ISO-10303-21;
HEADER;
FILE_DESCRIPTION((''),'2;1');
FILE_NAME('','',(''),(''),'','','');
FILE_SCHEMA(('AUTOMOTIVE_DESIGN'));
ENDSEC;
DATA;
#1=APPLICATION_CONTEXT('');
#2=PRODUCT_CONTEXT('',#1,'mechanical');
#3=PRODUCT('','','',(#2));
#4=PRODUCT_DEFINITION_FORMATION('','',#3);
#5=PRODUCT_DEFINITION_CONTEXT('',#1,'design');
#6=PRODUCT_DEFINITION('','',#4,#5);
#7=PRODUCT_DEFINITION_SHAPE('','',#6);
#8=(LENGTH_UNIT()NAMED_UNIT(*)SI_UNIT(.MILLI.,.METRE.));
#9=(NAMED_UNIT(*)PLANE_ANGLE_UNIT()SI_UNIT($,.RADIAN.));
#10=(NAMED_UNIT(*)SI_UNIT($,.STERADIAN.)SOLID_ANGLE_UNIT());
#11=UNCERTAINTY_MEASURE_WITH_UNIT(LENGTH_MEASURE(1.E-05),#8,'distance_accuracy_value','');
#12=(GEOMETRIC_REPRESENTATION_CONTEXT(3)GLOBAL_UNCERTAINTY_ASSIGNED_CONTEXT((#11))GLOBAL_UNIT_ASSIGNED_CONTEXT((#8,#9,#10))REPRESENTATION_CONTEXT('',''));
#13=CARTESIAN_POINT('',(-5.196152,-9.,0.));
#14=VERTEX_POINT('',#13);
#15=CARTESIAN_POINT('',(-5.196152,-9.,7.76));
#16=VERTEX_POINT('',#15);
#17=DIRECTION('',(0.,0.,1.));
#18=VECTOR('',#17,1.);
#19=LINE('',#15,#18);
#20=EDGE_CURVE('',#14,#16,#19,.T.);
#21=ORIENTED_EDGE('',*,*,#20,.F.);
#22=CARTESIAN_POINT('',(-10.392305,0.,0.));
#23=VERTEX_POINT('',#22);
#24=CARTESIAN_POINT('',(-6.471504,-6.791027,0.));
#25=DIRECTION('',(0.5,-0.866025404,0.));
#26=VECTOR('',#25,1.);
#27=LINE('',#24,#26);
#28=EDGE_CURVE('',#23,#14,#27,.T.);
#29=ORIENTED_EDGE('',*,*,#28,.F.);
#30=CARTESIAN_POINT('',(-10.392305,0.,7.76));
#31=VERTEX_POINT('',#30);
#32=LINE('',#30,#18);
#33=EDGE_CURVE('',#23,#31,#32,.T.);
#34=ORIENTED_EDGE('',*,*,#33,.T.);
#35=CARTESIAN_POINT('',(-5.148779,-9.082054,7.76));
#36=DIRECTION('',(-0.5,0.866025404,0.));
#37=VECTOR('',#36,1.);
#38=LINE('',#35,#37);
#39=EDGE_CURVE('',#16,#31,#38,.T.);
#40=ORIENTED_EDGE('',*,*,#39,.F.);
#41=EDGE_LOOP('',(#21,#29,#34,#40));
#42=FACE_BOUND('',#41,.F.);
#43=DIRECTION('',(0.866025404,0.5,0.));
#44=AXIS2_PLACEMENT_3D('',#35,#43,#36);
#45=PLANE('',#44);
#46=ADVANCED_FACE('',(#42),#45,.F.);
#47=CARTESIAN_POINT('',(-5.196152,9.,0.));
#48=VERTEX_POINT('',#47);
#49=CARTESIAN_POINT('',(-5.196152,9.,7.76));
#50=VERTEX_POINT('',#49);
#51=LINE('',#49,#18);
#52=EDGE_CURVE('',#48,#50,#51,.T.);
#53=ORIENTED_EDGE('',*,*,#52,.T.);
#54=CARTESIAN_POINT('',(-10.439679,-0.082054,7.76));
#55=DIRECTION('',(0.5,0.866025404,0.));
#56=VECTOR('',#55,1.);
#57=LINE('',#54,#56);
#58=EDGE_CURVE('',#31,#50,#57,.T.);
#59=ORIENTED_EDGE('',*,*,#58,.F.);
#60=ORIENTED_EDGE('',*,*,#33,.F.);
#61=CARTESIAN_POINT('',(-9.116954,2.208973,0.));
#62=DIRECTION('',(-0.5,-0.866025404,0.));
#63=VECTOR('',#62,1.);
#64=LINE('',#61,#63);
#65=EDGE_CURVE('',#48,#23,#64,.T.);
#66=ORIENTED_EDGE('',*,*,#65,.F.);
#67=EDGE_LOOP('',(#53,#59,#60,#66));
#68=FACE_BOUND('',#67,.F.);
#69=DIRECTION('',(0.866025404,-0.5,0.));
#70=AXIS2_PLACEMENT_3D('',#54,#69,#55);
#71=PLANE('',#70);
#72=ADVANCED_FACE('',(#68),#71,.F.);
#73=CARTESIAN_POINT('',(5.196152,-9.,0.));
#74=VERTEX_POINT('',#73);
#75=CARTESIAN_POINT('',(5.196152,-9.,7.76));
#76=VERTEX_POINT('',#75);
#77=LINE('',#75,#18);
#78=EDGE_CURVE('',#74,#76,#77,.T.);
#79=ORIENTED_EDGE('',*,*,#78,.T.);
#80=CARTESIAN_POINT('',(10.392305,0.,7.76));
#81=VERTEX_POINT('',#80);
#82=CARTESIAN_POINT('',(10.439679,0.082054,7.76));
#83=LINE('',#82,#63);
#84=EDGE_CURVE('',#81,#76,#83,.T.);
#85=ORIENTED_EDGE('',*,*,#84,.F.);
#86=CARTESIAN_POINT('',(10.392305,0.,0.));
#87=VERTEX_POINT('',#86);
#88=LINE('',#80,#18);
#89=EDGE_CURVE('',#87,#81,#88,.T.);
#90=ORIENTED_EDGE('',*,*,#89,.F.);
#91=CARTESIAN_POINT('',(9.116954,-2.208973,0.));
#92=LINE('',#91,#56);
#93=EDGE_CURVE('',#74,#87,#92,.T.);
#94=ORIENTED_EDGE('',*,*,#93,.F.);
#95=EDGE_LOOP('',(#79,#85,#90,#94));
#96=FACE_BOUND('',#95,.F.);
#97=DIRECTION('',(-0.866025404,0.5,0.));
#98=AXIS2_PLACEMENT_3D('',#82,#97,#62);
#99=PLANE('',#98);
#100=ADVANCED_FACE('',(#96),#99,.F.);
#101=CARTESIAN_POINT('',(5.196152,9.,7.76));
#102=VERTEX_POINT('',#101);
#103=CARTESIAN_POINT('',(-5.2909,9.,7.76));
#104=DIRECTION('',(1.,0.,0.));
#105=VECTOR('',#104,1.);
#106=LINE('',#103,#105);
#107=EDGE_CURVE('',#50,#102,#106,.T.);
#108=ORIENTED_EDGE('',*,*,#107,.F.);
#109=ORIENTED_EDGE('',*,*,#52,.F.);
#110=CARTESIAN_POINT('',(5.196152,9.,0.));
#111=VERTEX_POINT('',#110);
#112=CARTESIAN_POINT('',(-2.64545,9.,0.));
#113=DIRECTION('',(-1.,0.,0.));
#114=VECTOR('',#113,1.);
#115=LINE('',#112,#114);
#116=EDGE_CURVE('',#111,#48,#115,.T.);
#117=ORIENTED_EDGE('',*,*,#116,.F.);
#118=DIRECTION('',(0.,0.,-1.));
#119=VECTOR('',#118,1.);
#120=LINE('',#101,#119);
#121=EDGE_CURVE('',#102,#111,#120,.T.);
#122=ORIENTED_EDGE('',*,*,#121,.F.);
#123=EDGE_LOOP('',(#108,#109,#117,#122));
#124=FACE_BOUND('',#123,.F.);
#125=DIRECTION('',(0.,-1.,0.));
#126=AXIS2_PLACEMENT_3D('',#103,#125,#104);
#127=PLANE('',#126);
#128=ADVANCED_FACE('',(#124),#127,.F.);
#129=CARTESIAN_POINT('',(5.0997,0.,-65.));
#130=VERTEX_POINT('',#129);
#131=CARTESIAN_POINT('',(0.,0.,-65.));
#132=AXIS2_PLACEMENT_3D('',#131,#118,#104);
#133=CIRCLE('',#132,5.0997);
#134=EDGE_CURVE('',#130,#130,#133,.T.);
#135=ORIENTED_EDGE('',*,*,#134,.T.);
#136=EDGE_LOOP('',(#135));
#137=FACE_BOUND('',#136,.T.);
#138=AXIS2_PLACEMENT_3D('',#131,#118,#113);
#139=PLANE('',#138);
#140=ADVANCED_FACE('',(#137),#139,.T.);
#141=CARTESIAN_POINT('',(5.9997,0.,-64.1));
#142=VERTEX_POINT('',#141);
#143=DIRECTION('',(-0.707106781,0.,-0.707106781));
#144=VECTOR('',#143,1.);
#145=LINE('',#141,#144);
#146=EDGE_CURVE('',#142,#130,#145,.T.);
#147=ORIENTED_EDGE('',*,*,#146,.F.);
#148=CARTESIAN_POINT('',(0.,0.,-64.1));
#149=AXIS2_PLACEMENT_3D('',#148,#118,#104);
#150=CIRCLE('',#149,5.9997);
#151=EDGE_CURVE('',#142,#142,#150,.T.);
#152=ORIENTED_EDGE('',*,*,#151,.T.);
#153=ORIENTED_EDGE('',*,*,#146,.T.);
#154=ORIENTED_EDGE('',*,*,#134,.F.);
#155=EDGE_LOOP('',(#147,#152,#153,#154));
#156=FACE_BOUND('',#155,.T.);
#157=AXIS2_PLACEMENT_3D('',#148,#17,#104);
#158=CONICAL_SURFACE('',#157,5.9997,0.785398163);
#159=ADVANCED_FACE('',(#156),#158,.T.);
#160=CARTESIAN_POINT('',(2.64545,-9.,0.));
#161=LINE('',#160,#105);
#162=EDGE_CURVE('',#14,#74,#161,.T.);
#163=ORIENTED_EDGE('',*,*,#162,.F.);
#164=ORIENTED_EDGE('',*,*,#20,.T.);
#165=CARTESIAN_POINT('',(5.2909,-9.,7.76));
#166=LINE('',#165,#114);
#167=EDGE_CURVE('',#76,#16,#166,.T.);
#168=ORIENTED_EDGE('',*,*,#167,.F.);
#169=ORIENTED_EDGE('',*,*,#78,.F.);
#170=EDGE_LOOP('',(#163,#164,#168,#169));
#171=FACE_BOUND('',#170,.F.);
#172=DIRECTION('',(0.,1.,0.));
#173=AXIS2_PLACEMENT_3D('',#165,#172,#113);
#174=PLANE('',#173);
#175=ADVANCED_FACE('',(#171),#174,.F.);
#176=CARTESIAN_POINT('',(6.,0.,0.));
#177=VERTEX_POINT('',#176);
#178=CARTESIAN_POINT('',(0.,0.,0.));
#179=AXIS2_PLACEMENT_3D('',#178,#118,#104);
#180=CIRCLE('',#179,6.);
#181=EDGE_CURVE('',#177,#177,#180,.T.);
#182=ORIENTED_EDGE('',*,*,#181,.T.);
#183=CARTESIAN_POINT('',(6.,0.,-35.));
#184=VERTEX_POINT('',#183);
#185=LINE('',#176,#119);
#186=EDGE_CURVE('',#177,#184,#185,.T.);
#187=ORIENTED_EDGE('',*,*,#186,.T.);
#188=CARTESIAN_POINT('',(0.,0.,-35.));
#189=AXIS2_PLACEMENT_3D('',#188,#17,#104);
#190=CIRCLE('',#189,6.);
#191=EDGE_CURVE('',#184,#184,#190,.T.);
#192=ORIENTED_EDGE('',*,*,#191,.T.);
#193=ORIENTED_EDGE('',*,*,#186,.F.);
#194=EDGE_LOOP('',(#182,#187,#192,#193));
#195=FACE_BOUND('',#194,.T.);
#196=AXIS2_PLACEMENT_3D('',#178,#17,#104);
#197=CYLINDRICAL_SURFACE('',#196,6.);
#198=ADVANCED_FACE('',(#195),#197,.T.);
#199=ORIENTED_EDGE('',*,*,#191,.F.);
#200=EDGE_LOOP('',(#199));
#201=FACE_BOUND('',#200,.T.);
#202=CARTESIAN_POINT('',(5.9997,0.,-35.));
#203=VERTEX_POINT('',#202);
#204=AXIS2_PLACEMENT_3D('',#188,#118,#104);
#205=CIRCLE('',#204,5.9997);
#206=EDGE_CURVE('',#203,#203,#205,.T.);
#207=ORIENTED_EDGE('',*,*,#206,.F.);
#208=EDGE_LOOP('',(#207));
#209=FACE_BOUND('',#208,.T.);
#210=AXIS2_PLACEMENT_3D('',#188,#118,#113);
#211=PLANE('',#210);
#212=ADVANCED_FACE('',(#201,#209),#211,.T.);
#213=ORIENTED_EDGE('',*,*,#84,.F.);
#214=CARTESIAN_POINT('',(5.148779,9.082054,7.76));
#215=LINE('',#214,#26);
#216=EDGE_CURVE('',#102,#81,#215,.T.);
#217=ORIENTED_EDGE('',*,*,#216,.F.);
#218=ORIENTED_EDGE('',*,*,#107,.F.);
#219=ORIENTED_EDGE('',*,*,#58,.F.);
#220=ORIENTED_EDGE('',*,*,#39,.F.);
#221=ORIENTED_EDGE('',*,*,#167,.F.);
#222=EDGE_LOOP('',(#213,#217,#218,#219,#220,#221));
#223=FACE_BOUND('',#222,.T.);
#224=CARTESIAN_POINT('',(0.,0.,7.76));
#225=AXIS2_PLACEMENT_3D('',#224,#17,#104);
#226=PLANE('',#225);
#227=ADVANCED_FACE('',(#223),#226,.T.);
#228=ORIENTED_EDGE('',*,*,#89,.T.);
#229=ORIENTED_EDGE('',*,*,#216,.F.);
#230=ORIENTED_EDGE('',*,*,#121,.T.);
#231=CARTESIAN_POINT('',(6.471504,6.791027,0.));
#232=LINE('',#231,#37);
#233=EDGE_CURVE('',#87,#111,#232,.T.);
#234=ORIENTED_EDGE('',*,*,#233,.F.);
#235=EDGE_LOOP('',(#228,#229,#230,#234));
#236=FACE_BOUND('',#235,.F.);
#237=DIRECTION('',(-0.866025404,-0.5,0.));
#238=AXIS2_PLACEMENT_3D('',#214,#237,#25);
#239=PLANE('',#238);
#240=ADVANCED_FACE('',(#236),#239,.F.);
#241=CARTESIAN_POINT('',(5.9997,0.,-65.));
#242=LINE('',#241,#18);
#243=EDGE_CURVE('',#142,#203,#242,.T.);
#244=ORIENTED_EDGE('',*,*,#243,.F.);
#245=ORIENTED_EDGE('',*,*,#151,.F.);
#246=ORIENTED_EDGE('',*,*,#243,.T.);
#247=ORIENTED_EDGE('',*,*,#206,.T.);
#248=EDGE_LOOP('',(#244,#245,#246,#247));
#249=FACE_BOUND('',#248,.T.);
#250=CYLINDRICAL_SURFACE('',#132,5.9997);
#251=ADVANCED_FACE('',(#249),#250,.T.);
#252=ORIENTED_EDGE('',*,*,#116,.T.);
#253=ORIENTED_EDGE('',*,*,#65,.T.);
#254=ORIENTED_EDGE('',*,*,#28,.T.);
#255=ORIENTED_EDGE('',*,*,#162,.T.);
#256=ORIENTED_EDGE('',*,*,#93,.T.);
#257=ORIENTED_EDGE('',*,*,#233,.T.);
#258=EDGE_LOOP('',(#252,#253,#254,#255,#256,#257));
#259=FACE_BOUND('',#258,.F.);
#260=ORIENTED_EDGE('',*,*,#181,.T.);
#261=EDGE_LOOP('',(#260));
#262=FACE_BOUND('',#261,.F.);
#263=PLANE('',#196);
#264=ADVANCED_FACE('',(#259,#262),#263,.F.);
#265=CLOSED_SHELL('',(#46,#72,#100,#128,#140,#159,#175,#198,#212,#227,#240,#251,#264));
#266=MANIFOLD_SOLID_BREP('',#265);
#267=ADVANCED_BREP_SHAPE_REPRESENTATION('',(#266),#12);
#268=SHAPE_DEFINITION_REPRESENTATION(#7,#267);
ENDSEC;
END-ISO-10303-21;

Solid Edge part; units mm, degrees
sketch "Sketch1" plane through (0, 0, 0) normal (0, 0, 1) x (1, 0, 0)
  circle A0 centre (0, 0) radius 10.44
  dimension "D1" = 20.88
extrude "Protrusion1" add sketch "Sketch1" along normal blind 7.76
sketch "Sketch2" plane through (0, 0, 0) normal (0, 0, -1) x (1, 0, 0)
  circle A0 centre (0, 0) radius 6
extrude "Protrusion2" add sketch "Sketch2" along normal blind 65
sketch "Sketch3" plane through (0, 0, -65) normal (0, 0, -1) x (1, 0, 0)
  circle A0 centre (0, 0) radius 5.9997
extrude "Cutout1" cut sketch "Sketch3" against normal blind 30 flip side to cut
chamfer "Chamfer_1" distance 0.9 angle 45 1 edges at (-5.9997, 0, -65)
sketch "Sketch4" plane through (0, 0, 7.76) normal (0, 0, 1) x (1, 0, 0)
  line L0 (-5.2909, 9) -> (5.2909, 9)
  dimension "D1" = 18
extrude "Cutout2" cut sketch "Sketch4" against normal up to next material side at (0, 9.05, 7.76)
pattern_circular "Pattern1" count 6 over 360 about axis through (0, 0, 7.76) along (0, 0, 1) of "Cutout2"
properties part number "24102850"
